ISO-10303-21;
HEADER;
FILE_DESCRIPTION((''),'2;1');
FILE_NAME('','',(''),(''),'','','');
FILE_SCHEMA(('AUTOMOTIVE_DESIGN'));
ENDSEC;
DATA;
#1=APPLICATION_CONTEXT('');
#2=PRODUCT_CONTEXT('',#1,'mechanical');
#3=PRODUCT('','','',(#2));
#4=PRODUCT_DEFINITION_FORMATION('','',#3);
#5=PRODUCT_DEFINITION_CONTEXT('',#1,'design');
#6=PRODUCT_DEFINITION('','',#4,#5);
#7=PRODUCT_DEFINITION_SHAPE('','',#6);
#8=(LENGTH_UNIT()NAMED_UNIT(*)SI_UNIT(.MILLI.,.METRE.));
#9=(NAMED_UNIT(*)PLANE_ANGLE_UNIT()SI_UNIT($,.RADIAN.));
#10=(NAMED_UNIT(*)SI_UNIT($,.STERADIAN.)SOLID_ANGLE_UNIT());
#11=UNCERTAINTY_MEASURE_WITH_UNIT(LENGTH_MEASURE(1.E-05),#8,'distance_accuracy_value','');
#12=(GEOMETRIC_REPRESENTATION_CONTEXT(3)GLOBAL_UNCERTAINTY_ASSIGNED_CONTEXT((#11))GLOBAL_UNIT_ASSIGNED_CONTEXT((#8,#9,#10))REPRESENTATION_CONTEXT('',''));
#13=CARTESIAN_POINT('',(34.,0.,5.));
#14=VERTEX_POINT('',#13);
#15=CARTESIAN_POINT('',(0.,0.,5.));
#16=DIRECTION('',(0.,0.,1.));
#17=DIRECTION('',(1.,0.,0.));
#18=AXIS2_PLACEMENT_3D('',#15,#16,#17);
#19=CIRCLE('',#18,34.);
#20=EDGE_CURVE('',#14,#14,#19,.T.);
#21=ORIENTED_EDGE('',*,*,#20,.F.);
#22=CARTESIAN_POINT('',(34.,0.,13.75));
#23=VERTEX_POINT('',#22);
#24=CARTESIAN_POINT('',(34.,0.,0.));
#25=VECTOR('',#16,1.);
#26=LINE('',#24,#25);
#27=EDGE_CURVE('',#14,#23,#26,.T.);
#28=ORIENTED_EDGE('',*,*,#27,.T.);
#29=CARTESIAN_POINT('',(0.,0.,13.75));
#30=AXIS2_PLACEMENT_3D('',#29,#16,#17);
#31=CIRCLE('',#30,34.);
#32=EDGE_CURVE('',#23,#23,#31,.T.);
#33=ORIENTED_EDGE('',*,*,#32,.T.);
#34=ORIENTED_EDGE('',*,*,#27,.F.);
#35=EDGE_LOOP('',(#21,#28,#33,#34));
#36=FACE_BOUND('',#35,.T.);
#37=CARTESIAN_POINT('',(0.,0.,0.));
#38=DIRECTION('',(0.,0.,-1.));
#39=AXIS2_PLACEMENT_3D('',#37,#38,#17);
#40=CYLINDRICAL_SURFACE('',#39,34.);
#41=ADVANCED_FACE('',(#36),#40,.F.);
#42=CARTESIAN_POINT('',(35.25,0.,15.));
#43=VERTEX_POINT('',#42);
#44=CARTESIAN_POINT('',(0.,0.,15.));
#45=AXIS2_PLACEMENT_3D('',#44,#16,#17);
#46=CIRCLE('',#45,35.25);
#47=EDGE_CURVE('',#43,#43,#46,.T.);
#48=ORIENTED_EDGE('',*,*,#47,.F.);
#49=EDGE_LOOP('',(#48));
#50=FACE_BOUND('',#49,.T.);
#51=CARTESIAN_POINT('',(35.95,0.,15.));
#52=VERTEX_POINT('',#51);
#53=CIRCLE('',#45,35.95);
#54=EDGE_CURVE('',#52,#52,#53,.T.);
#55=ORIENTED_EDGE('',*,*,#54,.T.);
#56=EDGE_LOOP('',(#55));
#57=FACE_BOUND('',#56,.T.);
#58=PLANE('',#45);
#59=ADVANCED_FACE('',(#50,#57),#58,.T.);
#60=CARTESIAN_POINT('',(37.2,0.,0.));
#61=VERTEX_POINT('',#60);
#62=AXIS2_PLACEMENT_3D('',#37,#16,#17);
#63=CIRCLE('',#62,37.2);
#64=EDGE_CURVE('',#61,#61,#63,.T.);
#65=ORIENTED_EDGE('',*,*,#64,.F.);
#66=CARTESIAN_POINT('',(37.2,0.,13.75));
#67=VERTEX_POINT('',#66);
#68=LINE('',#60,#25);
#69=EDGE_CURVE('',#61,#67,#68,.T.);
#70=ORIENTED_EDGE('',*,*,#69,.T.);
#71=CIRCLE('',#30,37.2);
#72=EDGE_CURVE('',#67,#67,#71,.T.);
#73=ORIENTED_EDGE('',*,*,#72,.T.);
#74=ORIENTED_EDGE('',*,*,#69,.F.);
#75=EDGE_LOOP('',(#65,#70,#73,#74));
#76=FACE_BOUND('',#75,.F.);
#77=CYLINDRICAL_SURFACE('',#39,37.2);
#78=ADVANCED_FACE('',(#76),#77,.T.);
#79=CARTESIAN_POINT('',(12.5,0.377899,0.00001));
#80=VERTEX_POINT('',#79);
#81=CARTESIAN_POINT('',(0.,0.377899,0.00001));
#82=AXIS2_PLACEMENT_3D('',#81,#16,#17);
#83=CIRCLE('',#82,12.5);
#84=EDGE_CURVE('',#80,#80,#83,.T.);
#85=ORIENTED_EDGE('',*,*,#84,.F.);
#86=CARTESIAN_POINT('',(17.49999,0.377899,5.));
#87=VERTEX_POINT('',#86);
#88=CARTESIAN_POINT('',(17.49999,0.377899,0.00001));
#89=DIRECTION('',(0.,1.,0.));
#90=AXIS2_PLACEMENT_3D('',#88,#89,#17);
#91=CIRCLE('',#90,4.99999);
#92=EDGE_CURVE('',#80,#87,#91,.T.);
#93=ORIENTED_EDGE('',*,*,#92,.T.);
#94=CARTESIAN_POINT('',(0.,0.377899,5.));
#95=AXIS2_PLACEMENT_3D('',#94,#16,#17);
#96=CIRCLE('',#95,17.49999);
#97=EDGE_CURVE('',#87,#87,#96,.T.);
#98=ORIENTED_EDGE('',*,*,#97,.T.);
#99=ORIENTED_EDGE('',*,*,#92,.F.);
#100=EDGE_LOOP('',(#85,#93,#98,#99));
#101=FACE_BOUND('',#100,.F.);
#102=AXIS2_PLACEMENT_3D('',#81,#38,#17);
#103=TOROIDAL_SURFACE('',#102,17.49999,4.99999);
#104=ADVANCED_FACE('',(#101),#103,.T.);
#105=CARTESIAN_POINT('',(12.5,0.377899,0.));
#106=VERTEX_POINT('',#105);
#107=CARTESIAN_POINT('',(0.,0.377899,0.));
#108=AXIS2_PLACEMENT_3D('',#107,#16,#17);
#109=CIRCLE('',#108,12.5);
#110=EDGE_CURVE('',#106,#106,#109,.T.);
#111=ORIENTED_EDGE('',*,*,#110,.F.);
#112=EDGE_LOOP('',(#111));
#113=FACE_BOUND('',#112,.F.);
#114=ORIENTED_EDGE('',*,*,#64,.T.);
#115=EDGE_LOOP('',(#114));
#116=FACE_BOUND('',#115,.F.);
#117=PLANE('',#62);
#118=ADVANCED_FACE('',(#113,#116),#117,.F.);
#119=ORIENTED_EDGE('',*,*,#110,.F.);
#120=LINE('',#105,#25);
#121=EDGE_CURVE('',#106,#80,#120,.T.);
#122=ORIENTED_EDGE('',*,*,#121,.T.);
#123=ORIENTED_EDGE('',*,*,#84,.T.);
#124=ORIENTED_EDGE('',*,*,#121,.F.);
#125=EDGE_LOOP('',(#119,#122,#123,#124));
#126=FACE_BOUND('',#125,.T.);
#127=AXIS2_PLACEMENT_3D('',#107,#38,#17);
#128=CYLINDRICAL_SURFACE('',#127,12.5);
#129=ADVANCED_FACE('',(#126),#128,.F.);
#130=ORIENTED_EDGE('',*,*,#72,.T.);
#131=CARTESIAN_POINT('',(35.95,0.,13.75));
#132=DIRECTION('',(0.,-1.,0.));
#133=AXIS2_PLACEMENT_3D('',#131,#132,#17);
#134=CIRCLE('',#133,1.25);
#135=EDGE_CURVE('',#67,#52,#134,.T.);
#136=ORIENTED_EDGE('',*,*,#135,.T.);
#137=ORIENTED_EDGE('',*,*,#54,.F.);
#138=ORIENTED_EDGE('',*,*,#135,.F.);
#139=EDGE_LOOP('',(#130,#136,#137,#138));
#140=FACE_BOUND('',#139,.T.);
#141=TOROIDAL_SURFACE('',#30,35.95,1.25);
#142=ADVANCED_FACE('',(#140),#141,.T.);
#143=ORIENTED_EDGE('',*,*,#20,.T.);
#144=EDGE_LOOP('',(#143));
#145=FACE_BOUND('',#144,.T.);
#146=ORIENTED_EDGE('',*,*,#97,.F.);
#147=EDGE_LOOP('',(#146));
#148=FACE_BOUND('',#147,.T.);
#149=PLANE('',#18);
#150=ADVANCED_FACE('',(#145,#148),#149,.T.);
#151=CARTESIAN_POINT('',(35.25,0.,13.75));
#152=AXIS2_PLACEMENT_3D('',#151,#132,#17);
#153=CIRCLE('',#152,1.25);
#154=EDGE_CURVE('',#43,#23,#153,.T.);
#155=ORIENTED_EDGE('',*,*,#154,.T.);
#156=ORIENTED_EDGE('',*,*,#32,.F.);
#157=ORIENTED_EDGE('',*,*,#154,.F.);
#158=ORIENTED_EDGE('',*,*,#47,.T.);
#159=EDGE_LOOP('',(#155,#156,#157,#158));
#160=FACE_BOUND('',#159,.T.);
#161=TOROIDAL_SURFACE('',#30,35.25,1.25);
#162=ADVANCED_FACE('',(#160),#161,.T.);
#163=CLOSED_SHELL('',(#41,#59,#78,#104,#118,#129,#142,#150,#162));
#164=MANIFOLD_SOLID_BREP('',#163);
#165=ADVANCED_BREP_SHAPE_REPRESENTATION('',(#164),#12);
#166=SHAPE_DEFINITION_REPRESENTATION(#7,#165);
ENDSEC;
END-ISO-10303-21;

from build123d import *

# Parameters (mm, degrees)
F0_R     = 34
F0_R_2   = 12.5
F1_DEPTH = 5
F0_R_3   = 37.2
F2_DEPTH = 15
F3_R     = 1.25
F4_R     = 4.99999


# Not quite as in the source:
# - a fillet or chamfer is up to 0.001 mm smaller than in the source, because OpenCascade refuses the exact size


with BuildPart() as f1:
    # F0 (on Top) → F1 (new body)
    with BuildSketch(Plane.XY):
        Circle(F0_R)
        with Locations((0, 0.3778987616)):
            Circle(F0_R_2, mode=Mode.SUBTRACT)
    extrude(amount=F1_DEPTH)

    # F0 (on Top) → F2 (join)
    with BuildSketch(Plane.XY):
        Circle(F0_R_3)
        Circle(F0_R, mode=Mode.SUBTRACT)
    extrude(amount=F2_DEPTH)

    # F3
    f3_edges = [f1.edges().sort_by_distance(p)[0] for p in [
        (-34, 0, 15),
        (-37.2, 0, 15),
    ]]
    fillet(f3_edges, radius=F3_R)

    # F4 (radius 5 in the source; OpenCascade refuses exactly that, so slightly less here)
    f4_edges = [f1.edges().sort_by_distance(p)[0] for p in [
        (-12.5, 0.377899, 5),
    ]]
    fillet(f4_edges, radius=F4_R)


solid = f1.part
